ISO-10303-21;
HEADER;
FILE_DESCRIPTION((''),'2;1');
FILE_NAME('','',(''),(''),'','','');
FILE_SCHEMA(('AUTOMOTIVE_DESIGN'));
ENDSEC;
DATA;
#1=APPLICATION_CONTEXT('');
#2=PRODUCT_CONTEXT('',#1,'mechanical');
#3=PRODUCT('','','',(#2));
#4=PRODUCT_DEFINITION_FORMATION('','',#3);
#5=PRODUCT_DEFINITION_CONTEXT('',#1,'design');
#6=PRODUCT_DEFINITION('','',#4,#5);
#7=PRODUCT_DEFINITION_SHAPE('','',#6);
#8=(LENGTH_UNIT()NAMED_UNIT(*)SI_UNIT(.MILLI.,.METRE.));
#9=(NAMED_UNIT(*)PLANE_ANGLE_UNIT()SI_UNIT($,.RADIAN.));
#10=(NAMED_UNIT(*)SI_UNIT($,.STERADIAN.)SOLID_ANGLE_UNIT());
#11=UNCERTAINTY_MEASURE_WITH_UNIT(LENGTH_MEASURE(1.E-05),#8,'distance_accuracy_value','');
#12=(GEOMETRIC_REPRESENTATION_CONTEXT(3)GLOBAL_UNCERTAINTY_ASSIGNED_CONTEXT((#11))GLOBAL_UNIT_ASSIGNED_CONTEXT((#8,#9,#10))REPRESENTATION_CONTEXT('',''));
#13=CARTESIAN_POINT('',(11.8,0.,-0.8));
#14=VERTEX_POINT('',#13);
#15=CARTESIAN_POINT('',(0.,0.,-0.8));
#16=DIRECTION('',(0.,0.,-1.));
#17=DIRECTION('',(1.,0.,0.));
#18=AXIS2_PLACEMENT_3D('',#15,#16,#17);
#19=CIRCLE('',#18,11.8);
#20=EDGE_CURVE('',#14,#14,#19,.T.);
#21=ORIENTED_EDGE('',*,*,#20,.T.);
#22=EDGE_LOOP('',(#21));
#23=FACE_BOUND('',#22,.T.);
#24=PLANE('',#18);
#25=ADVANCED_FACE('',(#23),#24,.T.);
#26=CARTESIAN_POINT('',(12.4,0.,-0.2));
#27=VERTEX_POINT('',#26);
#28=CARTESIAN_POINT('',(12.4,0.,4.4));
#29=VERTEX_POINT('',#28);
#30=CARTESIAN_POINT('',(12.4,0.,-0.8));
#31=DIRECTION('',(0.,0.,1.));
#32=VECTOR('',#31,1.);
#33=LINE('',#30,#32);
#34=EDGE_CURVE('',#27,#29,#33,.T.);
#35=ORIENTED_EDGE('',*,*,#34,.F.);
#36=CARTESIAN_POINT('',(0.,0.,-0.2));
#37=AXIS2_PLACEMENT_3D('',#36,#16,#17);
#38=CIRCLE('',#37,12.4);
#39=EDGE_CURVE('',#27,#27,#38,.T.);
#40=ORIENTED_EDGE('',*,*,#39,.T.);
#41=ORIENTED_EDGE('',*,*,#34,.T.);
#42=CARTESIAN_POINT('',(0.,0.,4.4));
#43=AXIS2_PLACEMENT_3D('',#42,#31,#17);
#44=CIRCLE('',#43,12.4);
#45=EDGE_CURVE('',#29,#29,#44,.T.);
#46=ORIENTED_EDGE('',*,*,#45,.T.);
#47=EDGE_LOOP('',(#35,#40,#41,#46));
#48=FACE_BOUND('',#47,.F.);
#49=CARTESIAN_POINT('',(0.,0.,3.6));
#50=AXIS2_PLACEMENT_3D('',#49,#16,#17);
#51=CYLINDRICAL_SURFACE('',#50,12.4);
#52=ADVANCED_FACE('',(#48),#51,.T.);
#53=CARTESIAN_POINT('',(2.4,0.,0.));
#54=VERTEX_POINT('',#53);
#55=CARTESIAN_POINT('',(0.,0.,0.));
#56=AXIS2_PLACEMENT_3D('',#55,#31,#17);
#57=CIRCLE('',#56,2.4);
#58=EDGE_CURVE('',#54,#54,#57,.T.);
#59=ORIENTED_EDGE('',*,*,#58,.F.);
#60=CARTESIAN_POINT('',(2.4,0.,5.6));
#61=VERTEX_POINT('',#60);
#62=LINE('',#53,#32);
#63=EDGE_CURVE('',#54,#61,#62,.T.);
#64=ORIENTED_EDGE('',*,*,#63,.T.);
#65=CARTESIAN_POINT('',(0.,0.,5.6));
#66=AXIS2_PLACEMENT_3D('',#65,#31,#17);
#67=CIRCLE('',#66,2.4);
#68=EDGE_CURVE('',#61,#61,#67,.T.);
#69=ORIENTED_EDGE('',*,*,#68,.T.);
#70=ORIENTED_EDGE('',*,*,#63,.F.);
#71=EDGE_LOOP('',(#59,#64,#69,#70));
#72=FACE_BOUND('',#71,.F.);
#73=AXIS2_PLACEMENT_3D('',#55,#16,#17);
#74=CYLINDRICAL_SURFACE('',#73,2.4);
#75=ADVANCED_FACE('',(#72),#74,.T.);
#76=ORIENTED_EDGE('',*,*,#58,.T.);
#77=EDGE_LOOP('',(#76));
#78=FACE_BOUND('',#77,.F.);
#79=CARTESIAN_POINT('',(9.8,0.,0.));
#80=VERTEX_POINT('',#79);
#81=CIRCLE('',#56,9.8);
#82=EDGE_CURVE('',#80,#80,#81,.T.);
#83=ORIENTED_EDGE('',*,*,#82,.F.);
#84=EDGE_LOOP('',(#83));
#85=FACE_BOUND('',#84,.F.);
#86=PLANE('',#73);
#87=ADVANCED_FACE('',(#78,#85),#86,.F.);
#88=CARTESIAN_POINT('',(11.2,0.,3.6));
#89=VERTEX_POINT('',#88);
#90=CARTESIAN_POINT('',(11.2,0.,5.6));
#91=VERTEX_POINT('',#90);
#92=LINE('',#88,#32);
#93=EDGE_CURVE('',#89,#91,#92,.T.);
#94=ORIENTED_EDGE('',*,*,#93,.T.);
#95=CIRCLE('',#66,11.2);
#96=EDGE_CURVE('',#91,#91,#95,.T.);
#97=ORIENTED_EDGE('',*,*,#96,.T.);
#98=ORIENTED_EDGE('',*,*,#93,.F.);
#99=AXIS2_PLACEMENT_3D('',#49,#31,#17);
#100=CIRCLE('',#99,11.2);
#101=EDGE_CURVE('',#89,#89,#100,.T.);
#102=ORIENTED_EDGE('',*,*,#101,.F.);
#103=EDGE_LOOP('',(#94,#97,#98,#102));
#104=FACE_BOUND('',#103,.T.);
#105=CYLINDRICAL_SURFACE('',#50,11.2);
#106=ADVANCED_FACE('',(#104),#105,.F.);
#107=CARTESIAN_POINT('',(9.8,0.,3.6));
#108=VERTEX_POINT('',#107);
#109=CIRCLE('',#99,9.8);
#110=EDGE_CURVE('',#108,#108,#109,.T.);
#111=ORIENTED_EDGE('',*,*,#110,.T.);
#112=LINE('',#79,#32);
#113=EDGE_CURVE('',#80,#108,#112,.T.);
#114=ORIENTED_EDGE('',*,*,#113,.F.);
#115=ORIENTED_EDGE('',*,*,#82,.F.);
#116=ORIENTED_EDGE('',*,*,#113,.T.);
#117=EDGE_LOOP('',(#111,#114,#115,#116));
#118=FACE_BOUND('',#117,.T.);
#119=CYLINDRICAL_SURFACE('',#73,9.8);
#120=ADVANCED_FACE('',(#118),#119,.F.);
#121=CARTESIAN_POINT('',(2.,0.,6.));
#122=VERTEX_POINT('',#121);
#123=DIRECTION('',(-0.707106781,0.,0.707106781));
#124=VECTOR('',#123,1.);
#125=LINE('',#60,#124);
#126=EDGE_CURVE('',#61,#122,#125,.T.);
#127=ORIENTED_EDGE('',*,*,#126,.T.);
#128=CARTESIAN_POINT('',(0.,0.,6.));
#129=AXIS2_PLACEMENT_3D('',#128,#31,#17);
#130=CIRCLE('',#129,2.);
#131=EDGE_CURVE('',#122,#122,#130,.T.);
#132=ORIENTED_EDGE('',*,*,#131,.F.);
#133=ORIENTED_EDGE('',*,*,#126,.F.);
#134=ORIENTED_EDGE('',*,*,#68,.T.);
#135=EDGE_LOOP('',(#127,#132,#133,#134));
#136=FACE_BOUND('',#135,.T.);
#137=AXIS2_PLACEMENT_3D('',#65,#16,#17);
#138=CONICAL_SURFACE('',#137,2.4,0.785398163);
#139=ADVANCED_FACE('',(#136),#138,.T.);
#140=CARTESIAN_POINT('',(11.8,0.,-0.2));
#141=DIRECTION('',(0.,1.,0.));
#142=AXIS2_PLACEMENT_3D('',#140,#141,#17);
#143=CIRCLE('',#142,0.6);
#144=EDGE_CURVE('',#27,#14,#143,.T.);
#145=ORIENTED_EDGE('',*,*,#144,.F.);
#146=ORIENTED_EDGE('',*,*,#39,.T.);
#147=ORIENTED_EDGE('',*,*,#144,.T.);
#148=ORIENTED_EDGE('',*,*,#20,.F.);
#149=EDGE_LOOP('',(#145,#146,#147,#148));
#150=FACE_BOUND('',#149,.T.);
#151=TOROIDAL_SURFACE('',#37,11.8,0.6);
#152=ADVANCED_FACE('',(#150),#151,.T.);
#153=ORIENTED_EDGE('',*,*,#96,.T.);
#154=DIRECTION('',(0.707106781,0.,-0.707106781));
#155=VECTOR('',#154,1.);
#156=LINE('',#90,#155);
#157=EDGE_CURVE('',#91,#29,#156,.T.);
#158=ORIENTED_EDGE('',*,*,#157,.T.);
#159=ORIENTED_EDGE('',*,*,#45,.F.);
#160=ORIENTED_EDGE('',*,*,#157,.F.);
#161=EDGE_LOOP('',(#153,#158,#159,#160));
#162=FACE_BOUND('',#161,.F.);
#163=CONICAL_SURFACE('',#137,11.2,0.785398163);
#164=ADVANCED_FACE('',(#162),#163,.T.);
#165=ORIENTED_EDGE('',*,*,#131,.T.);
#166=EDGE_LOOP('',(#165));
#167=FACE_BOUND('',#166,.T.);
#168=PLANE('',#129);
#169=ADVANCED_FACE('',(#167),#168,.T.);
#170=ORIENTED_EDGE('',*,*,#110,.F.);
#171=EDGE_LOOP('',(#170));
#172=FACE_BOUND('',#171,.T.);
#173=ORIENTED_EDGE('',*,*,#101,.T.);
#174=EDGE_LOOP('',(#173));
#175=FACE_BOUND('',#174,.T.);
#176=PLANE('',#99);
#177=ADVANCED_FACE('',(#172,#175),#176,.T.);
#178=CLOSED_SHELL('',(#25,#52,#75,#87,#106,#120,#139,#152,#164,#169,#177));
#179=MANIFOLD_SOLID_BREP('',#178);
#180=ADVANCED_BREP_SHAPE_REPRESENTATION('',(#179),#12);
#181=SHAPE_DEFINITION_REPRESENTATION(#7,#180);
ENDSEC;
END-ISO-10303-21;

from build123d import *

# Parameters (mm, degrees)
F0_R     = 12.4
F0_R_2   = 9.8
F1_DEPTH = 3.6
F2_R     = 12.4
F2_R_2   = 9.8
F3_DEPTH = 0.8
F4_R     = 12.4
F4_R_2   = 11.2
F5_DEPTH = 2
F6_R     = 0.6
F7_R     = 2.4
F8_DEPTH = 6
F9_SIZE  = 0.4


# Not quite as in the source:
# - a fillet or chamfer that OpenCascade refuses, or shapes differently, is made with other operations: its cross-section is extruded or revolved along the edge and cut away or added


with BuildPart() as f1:
    # F0 (on Top) → F1 (new body)
    with BuildSketch(Plane.XY):
        Circle(F0_R)
        Circle(F0_R_2, mode=Mode.SUBTRACT)
    extrude(amount=F1_DEPTH)

    # F2 (on face) → F3 (join)
    with BuildSketch(Plane(origin=(0, 0, 0), x_dir=(1, 0, 0), z_dir=(0, 0, -1))):
        Circle(F2_R)
        Circle(F2_R_2, mode=Mode.SUBTRACT)
        Circle(F2_R_2)
    extrude(amount=F3_DEPTH)

    # F4 (on face) → F5 (join)
    with BuildSketch(Plane.XY.offset(3.6)):
        Circle(F4_R)
        Circle(F4_R_2, mode=Mode.SUBTRACT)
    extrude(amount=F5_DEPTH)

    # F6
    f6_edges = [f1.edges().sort_by_distance(p)[0] for p in [
        (-12.4, 0, -0.8),
    ]]
    fillet(f6_edges, radius=F6_R)

    # F7 (on face) → F8 (join)
    with BuildSketch(Plane.XY):
        Circle(F7_R)
    extrude(amount=F8_DEPTH)

    # F9
    f9_edges = [f1.edges().sort_by_distance(p)[0] for p in [
        (-2.4, 0, 6),
    ]]
    chamfer(f9_edges, length=F9_SIZE)

    # F10: chamfer of 1.2 on 1 edges, made by hand

    # F10_s1 → F10_t2 (revolve, cut)
    with BuildSketch(Plane.XZ):
        Polygon((11.2, 5.6), (12.4, 4.4), (12.4, 5.6), align=None)
    revolve(axis=Axis((0, 0, 5.6), (0, 0, 1)), mode=Mode.SUBTRACT)


solid = f1.part
